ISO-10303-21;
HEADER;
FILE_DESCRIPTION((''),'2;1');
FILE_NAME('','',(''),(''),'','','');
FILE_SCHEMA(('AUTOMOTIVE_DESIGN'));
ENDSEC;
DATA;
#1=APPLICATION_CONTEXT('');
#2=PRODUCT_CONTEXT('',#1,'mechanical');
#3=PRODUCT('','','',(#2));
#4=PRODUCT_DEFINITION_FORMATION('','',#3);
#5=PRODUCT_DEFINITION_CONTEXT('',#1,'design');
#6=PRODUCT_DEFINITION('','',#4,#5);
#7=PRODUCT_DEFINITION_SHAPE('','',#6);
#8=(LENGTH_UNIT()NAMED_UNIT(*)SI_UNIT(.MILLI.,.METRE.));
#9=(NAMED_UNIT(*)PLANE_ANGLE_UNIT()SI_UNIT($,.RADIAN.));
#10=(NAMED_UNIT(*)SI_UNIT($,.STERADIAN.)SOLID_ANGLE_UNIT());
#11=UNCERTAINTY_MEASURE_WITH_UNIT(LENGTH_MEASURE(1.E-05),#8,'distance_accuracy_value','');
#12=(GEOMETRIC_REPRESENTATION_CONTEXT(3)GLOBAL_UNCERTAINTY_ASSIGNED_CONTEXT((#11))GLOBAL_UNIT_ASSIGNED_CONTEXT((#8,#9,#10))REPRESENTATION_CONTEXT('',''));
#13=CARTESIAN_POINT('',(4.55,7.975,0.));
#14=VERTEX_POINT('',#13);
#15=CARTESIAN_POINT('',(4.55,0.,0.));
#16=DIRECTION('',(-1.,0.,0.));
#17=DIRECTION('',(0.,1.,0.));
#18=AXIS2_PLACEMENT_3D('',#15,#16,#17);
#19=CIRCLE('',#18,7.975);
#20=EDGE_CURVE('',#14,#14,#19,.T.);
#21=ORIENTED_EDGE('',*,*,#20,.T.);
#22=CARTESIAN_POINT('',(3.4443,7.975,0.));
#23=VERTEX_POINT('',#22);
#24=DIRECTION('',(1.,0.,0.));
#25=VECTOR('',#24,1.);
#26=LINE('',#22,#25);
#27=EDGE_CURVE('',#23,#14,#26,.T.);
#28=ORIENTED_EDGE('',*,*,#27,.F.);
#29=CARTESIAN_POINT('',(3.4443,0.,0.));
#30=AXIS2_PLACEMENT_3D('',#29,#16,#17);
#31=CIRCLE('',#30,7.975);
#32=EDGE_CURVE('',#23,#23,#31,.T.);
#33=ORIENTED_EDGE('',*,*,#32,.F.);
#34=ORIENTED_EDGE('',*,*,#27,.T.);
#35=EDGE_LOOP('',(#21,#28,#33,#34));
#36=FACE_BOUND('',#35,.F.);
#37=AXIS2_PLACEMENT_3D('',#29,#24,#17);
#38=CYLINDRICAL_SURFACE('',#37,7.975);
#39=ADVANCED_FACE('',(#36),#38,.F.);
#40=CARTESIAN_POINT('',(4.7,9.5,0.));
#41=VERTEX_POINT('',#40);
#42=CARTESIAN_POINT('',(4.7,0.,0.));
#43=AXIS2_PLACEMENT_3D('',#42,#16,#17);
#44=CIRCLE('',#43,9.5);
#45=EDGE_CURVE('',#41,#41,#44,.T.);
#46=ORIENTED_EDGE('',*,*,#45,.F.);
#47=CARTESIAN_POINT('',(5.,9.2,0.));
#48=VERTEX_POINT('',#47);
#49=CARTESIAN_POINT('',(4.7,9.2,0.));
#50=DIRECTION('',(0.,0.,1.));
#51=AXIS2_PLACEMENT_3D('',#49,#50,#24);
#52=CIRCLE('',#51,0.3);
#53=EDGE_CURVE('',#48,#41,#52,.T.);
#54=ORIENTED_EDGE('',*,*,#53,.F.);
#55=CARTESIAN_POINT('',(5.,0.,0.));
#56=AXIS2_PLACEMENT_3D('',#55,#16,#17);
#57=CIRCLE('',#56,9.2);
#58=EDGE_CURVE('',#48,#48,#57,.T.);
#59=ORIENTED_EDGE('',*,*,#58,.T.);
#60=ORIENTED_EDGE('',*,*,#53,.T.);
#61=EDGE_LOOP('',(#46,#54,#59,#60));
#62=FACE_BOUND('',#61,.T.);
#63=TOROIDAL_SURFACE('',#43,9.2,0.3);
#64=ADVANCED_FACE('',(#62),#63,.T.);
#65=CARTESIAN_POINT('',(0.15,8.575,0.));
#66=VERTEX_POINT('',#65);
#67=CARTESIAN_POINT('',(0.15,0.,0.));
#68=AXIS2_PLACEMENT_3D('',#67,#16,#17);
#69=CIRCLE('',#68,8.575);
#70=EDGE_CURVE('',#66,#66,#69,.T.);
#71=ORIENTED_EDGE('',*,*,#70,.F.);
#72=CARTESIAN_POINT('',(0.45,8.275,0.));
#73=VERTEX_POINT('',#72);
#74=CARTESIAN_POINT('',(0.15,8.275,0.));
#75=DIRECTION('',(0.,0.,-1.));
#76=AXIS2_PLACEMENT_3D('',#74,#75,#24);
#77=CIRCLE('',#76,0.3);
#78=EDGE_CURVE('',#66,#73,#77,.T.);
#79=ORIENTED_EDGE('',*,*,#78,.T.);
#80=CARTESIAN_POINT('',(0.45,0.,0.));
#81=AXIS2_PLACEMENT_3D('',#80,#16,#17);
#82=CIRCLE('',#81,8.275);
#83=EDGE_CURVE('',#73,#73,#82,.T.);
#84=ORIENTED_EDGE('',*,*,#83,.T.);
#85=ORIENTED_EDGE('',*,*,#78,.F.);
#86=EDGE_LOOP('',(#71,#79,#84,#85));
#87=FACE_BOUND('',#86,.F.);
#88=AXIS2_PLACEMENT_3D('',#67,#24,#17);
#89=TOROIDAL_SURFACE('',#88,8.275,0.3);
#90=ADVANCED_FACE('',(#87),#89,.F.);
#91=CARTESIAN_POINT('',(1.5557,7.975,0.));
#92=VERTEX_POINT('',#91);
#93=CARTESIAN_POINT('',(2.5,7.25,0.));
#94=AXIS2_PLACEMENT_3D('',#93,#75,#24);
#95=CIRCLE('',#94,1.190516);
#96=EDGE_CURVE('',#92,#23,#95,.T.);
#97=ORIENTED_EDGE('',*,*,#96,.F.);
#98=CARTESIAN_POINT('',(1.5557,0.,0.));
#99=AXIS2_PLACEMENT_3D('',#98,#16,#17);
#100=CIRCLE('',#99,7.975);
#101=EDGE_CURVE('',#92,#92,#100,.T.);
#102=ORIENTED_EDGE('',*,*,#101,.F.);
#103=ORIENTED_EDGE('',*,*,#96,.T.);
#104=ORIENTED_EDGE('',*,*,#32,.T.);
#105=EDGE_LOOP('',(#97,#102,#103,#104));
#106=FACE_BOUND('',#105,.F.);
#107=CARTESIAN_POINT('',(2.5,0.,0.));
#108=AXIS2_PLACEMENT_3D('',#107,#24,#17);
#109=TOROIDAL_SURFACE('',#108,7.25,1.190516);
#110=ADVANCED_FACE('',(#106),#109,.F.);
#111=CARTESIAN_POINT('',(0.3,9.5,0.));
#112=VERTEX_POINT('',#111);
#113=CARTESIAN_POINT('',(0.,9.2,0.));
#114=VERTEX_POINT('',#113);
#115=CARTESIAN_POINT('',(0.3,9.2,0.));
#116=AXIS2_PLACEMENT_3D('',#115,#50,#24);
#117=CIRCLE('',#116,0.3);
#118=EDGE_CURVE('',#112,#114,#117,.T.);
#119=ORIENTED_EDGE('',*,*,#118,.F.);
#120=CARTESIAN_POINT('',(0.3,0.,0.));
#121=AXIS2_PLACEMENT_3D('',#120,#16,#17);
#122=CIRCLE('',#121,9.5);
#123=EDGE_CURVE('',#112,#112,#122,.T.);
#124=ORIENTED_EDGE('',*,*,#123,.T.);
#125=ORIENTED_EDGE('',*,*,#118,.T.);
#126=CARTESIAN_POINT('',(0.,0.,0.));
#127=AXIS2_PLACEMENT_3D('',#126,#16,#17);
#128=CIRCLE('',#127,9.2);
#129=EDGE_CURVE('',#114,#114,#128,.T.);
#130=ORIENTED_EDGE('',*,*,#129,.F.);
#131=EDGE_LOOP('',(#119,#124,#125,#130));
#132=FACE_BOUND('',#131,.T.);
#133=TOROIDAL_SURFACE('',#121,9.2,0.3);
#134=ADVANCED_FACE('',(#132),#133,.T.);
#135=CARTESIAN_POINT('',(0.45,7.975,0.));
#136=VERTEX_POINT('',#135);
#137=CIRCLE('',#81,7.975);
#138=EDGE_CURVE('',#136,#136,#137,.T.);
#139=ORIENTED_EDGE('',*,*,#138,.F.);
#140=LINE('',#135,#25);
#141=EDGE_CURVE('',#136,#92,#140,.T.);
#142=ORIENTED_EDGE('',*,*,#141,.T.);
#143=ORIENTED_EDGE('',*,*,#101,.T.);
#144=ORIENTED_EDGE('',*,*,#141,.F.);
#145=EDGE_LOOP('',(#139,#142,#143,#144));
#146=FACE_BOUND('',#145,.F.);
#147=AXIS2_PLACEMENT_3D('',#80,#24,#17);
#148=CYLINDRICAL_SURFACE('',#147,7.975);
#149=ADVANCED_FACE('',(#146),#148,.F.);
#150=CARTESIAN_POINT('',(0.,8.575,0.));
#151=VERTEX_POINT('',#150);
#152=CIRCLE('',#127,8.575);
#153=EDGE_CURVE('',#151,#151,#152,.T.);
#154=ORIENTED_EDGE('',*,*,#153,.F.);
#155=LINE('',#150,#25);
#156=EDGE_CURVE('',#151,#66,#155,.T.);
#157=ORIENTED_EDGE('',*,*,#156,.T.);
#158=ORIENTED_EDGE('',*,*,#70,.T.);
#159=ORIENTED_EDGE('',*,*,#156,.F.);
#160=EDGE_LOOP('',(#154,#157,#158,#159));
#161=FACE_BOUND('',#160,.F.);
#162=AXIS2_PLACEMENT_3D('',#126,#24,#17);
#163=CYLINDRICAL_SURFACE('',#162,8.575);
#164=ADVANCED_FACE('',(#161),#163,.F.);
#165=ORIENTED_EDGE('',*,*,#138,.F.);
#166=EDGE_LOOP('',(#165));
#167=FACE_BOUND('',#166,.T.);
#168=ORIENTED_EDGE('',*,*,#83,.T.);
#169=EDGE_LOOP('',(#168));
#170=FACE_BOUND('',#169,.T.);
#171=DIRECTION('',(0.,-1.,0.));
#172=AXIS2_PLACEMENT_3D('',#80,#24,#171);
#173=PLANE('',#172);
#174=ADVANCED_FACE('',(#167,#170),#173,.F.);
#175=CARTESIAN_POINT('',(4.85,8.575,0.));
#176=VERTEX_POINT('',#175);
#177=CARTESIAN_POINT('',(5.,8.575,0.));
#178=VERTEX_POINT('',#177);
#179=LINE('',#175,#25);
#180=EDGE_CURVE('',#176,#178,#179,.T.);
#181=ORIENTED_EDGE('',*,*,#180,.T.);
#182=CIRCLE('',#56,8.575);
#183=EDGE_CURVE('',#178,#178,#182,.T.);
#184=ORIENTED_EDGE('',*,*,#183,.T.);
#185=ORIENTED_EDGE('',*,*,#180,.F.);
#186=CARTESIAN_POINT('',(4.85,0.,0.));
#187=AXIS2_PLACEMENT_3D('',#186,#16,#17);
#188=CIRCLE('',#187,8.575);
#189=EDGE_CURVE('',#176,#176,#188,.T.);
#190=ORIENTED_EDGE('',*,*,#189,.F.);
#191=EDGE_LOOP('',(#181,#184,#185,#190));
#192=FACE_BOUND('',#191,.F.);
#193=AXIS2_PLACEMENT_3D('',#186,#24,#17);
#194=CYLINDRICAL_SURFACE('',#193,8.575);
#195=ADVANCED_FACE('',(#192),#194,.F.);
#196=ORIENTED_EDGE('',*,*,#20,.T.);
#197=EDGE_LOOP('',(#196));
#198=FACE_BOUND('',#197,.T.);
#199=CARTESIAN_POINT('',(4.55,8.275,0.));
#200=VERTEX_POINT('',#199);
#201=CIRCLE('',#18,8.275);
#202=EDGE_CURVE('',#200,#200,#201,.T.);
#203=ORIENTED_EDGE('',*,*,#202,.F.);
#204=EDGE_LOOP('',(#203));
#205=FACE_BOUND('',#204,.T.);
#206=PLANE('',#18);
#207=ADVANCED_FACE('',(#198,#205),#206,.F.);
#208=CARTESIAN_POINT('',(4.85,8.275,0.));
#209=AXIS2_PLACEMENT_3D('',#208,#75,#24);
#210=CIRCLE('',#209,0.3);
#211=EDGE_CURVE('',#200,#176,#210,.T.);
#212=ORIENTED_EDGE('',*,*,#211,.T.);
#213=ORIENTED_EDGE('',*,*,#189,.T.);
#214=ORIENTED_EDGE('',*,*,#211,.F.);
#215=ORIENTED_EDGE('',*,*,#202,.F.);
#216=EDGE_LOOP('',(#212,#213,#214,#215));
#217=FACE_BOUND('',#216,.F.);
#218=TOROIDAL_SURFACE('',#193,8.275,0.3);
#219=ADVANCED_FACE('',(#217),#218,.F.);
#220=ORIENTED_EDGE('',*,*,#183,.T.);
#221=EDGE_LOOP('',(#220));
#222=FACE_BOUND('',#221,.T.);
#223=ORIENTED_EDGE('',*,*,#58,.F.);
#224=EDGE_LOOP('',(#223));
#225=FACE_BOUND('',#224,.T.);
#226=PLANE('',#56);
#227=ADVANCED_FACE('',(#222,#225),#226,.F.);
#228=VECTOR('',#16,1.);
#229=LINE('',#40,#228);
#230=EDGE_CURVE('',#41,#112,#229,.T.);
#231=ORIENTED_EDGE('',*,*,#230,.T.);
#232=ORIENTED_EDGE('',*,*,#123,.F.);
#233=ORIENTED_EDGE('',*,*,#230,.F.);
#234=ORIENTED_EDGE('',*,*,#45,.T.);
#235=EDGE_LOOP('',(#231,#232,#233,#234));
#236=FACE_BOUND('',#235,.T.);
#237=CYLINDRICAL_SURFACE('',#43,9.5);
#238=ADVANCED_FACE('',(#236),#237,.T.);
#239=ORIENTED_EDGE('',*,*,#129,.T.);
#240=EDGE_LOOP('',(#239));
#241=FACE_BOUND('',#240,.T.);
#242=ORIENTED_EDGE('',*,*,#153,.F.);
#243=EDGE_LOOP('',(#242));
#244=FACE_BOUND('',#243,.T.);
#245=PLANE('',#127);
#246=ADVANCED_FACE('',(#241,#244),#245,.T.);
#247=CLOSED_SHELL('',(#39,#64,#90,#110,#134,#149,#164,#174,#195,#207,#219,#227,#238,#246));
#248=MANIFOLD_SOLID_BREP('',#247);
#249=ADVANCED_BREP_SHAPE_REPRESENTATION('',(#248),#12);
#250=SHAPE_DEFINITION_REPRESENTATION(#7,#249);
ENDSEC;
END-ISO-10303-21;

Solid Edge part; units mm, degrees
sketch "Sketch1" plane through (0, 0, 0) normal (0, 0, 1) x (1, 0, 0)
  line L0 (0, 9.2) -> (0, 8.575)
  line L1 (0, 8.575) -> (0.15, 8.575)
  arc A0 (0.15, 8.575) -> (0.45, 8.275) centre (0.15, 8.275) cw
  line L2 (0.45, 8.275) -> (0.45, 7.975)
  line L3 (0.45, 7.975) -> (1.5557, 7.975)
  arc A1 (1.5557, 7.975) -> (3.4443, 7.975) centre (2.5, 7.25) cw
  line L4 (3.4443, 7.975) -> (4.55, 7.975)
  line L5 (4.55, 7.975) -> (4.55, 8.275)
  arc A2 (4.55, 8.275) -> (4.85, 8.575) centre (4.85, 8.275) cw
  line L6 (4.85, 8.575) -> (5, 8.575)
  line L7 (5, 8.575) -> (5, 9.2)
  arc A3 (5, 9.2) -> (4.7, 9.5) centre (4.7, 9.2) ccw
  line L8 (4.7, 9.5) -> (0.3, 9.5)
  arc A4 (0.3, 9.5) -> (0, 9.2) centre (0.3, 9.2) ccw
revolve "RevolvedProtrusion1" add sketch "Sketch1" angle 360 about axis through (50, 0, 0) along (-1, 0, 0)
properties part number "SKF_61800-2RS1_or"
